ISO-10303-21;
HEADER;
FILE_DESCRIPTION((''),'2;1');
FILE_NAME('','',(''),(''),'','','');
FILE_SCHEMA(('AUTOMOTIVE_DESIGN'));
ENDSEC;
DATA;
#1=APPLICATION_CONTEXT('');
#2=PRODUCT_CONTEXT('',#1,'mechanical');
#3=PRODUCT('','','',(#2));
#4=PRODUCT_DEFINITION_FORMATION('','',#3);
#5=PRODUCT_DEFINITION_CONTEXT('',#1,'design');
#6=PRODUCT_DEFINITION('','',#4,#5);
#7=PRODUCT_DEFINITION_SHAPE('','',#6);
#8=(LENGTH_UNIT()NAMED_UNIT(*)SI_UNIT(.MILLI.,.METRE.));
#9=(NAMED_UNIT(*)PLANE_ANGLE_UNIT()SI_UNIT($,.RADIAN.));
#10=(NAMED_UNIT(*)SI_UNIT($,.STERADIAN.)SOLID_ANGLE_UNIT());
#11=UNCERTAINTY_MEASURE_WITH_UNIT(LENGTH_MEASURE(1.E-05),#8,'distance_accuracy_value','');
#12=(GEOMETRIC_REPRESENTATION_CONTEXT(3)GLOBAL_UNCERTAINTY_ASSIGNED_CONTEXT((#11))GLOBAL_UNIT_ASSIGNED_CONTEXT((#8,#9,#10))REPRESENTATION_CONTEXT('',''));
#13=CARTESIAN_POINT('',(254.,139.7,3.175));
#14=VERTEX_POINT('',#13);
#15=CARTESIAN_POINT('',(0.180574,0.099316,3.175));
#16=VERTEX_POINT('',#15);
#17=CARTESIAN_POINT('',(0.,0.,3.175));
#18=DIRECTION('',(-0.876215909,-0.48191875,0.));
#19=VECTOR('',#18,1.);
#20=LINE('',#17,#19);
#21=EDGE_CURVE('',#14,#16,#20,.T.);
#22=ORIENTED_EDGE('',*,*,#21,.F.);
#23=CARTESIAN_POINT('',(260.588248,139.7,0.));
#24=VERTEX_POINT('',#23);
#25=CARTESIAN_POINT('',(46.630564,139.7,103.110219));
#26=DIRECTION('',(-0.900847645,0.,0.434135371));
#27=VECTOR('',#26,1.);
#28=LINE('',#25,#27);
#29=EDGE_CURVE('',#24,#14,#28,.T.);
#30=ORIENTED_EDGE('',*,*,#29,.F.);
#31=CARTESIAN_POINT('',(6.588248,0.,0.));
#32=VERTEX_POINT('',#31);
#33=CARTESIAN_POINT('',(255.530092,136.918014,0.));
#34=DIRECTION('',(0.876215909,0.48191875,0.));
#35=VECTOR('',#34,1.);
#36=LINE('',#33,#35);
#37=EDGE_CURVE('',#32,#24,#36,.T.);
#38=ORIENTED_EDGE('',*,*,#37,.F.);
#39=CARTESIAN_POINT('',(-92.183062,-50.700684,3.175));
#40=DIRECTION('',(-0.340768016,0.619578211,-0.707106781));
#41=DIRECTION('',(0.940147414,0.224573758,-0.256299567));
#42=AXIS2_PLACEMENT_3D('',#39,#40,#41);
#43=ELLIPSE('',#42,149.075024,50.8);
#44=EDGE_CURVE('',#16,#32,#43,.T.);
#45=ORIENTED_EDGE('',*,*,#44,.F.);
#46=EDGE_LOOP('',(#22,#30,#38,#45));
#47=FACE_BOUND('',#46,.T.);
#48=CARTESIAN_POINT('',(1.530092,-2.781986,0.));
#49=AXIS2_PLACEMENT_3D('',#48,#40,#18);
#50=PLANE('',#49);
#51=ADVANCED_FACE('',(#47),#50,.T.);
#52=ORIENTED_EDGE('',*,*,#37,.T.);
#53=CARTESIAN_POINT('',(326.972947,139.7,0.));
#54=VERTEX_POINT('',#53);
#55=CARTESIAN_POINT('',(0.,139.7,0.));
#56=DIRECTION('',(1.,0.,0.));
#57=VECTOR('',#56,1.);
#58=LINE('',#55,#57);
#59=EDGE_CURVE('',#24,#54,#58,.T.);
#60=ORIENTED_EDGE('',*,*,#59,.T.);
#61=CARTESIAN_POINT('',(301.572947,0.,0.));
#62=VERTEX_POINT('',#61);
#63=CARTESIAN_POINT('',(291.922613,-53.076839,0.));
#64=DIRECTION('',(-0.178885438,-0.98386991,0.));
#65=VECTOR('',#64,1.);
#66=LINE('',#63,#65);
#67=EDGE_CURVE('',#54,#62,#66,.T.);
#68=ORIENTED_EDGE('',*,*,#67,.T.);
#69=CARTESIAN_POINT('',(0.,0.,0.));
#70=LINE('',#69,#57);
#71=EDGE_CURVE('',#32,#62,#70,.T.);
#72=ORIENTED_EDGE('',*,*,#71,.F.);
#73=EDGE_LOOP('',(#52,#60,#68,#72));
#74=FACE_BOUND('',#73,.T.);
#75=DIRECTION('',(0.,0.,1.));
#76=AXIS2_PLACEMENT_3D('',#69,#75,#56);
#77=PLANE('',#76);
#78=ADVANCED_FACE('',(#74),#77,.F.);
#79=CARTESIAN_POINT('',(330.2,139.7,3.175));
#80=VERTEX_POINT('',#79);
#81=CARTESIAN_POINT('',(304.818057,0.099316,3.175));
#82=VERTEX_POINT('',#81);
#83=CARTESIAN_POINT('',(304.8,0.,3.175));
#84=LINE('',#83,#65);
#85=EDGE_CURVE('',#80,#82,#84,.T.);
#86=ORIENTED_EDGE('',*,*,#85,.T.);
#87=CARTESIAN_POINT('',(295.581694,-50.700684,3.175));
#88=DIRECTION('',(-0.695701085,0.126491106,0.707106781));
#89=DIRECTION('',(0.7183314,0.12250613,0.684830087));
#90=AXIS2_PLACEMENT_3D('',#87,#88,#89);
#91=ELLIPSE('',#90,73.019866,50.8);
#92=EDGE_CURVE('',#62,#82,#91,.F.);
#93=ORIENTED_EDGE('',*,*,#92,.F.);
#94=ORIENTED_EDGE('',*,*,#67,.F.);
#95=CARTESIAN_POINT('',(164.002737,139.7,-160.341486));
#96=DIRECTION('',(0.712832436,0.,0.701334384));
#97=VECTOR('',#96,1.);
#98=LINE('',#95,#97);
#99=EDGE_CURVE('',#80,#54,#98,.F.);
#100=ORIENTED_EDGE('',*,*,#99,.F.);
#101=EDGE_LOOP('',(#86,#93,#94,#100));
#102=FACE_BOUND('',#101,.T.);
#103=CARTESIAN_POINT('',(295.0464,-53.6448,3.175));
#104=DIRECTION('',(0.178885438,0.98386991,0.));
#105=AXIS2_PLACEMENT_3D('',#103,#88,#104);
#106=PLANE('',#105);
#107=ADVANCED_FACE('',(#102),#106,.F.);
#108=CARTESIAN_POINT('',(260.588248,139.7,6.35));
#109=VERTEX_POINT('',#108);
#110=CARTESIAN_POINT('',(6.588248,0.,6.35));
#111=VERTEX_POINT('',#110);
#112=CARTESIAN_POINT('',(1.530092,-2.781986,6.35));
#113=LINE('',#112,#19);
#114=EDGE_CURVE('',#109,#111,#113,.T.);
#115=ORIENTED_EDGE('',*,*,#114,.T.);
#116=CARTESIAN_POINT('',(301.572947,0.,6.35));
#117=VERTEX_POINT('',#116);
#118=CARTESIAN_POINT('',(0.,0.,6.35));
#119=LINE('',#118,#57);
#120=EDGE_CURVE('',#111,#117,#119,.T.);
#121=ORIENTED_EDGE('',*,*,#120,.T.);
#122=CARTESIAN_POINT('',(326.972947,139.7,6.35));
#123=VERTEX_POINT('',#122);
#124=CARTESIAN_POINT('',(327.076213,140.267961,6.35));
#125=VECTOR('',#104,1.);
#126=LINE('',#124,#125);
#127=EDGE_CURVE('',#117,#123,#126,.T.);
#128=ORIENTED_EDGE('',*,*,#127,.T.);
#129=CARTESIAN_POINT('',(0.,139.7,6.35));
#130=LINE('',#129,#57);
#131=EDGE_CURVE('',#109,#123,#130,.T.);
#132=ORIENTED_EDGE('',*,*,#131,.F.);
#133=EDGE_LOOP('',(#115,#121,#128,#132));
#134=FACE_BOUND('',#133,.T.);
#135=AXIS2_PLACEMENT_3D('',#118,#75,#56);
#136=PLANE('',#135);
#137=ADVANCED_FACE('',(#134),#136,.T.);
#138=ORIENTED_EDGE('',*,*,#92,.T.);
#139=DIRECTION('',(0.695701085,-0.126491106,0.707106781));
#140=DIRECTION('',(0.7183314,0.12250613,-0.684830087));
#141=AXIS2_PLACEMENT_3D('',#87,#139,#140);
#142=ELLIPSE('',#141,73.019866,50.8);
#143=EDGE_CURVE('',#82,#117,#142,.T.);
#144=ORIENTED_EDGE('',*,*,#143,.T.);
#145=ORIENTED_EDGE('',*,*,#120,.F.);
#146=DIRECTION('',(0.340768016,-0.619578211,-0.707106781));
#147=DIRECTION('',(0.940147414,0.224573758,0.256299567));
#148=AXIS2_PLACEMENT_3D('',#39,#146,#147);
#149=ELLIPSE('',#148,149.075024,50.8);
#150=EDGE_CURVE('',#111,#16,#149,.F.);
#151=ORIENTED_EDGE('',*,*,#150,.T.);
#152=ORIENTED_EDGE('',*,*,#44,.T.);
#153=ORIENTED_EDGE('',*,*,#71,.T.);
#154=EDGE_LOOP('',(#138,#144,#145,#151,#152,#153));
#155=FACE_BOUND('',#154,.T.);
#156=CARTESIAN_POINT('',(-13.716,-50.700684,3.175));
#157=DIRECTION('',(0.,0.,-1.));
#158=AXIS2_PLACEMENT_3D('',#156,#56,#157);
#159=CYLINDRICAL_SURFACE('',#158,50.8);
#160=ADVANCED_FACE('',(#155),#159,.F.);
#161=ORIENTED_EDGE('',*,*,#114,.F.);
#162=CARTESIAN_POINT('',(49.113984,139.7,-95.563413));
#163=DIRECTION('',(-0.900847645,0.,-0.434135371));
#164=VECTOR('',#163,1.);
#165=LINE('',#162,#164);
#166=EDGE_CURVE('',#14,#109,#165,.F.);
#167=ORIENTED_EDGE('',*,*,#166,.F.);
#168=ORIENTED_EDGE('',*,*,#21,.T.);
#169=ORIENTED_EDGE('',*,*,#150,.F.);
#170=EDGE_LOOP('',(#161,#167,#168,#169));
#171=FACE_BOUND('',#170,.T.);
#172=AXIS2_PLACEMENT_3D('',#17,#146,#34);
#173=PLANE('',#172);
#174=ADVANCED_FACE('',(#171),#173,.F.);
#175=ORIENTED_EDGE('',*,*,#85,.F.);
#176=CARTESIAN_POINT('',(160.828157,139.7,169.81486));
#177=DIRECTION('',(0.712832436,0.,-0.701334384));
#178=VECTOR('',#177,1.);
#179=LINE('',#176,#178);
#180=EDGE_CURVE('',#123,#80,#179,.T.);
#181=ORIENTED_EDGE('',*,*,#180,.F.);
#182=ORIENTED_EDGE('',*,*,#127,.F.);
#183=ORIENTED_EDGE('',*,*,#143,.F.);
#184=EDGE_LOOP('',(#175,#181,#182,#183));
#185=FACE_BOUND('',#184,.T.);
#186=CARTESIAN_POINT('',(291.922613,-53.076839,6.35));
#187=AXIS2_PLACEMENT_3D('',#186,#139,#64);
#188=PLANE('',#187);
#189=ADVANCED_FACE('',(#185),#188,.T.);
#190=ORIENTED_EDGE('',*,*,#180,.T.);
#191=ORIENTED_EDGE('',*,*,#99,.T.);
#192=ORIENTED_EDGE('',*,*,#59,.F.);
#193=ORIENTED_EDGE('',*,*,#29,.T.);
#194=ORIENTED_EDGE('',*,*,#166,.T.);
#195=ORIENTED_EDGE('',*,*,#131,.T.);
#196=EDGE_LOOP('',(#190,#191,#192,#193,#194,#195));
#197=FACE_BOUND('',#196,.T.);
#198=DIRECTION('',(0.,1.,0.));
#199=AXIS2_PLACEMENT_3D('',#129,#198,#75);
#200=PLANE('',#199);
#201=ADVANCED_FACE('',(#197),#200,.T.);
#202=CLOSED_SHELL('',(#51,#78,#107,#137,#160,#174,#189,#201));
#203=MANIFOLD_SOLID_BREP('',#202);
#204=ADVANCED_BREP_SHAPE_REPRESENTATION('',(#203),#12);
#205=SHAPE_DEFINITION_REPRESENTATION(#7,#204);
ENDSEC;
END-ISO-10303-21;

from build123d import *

# Parameters (mm, degrees)
BOSS_EXTRUDE1_DEPTH     = 6.35
CHAMFER1_SIZE           = 3.175
CUT_EXTRUDE1_DEPTH      = 316.484
CUT_EXTRUDE1_DEPTH_BACK = 13.716
SKETCH2_R               = 50.8


with BuildPart() as part:
    # Sketch1 → Boss-Extrude1 (new body)
    with BuildSketch(Plane.XY):
        Polygon((254, 139.7), (0, 0), (254, 0), align=None)
        Polygon((254, 139.7), (254, 0), (304.8, 0), (330.2, 139.7), align=None)
    extrude(amount=BOSS_EXTRUDE1_DEPTH)

    # Chamfer1
    chamfer1_edges = [part.edges().sort_by_distance(p)[0] for p in [
        (317.5, 69.85, 0),
        (317.5, 69.85, 6.35),
        (127, 69.85, 6.35),
        (127, 69.85, 0),
    ]]
    chamfer(chamfer1_edges, length=CHAMFER1_SIZE - 0.0001)  # a hair under: the kernel refuses the full size

    # Sketch2 → Cut-Extrude1 (cut, two sides: drawn at the far end of the back side and taken through both)
    with BuildSketch(Plane(origin=(0, 0, 0), x_dir=(0, 0, -1), z_dir=(1, 0, 0)).offset(-CUT_EXTRUDE1_DEPTH_BACK)):
        with Locations((-3.175, -50.700684167)):
            Circle(SKETCH2_R)
    extrude(amount=CUT_EXTRUDE1_DEPTH + CUT_EXTRUDE1_DEPTH_BACK, mode=Mode.SUBTRACT)


solid = part.part
